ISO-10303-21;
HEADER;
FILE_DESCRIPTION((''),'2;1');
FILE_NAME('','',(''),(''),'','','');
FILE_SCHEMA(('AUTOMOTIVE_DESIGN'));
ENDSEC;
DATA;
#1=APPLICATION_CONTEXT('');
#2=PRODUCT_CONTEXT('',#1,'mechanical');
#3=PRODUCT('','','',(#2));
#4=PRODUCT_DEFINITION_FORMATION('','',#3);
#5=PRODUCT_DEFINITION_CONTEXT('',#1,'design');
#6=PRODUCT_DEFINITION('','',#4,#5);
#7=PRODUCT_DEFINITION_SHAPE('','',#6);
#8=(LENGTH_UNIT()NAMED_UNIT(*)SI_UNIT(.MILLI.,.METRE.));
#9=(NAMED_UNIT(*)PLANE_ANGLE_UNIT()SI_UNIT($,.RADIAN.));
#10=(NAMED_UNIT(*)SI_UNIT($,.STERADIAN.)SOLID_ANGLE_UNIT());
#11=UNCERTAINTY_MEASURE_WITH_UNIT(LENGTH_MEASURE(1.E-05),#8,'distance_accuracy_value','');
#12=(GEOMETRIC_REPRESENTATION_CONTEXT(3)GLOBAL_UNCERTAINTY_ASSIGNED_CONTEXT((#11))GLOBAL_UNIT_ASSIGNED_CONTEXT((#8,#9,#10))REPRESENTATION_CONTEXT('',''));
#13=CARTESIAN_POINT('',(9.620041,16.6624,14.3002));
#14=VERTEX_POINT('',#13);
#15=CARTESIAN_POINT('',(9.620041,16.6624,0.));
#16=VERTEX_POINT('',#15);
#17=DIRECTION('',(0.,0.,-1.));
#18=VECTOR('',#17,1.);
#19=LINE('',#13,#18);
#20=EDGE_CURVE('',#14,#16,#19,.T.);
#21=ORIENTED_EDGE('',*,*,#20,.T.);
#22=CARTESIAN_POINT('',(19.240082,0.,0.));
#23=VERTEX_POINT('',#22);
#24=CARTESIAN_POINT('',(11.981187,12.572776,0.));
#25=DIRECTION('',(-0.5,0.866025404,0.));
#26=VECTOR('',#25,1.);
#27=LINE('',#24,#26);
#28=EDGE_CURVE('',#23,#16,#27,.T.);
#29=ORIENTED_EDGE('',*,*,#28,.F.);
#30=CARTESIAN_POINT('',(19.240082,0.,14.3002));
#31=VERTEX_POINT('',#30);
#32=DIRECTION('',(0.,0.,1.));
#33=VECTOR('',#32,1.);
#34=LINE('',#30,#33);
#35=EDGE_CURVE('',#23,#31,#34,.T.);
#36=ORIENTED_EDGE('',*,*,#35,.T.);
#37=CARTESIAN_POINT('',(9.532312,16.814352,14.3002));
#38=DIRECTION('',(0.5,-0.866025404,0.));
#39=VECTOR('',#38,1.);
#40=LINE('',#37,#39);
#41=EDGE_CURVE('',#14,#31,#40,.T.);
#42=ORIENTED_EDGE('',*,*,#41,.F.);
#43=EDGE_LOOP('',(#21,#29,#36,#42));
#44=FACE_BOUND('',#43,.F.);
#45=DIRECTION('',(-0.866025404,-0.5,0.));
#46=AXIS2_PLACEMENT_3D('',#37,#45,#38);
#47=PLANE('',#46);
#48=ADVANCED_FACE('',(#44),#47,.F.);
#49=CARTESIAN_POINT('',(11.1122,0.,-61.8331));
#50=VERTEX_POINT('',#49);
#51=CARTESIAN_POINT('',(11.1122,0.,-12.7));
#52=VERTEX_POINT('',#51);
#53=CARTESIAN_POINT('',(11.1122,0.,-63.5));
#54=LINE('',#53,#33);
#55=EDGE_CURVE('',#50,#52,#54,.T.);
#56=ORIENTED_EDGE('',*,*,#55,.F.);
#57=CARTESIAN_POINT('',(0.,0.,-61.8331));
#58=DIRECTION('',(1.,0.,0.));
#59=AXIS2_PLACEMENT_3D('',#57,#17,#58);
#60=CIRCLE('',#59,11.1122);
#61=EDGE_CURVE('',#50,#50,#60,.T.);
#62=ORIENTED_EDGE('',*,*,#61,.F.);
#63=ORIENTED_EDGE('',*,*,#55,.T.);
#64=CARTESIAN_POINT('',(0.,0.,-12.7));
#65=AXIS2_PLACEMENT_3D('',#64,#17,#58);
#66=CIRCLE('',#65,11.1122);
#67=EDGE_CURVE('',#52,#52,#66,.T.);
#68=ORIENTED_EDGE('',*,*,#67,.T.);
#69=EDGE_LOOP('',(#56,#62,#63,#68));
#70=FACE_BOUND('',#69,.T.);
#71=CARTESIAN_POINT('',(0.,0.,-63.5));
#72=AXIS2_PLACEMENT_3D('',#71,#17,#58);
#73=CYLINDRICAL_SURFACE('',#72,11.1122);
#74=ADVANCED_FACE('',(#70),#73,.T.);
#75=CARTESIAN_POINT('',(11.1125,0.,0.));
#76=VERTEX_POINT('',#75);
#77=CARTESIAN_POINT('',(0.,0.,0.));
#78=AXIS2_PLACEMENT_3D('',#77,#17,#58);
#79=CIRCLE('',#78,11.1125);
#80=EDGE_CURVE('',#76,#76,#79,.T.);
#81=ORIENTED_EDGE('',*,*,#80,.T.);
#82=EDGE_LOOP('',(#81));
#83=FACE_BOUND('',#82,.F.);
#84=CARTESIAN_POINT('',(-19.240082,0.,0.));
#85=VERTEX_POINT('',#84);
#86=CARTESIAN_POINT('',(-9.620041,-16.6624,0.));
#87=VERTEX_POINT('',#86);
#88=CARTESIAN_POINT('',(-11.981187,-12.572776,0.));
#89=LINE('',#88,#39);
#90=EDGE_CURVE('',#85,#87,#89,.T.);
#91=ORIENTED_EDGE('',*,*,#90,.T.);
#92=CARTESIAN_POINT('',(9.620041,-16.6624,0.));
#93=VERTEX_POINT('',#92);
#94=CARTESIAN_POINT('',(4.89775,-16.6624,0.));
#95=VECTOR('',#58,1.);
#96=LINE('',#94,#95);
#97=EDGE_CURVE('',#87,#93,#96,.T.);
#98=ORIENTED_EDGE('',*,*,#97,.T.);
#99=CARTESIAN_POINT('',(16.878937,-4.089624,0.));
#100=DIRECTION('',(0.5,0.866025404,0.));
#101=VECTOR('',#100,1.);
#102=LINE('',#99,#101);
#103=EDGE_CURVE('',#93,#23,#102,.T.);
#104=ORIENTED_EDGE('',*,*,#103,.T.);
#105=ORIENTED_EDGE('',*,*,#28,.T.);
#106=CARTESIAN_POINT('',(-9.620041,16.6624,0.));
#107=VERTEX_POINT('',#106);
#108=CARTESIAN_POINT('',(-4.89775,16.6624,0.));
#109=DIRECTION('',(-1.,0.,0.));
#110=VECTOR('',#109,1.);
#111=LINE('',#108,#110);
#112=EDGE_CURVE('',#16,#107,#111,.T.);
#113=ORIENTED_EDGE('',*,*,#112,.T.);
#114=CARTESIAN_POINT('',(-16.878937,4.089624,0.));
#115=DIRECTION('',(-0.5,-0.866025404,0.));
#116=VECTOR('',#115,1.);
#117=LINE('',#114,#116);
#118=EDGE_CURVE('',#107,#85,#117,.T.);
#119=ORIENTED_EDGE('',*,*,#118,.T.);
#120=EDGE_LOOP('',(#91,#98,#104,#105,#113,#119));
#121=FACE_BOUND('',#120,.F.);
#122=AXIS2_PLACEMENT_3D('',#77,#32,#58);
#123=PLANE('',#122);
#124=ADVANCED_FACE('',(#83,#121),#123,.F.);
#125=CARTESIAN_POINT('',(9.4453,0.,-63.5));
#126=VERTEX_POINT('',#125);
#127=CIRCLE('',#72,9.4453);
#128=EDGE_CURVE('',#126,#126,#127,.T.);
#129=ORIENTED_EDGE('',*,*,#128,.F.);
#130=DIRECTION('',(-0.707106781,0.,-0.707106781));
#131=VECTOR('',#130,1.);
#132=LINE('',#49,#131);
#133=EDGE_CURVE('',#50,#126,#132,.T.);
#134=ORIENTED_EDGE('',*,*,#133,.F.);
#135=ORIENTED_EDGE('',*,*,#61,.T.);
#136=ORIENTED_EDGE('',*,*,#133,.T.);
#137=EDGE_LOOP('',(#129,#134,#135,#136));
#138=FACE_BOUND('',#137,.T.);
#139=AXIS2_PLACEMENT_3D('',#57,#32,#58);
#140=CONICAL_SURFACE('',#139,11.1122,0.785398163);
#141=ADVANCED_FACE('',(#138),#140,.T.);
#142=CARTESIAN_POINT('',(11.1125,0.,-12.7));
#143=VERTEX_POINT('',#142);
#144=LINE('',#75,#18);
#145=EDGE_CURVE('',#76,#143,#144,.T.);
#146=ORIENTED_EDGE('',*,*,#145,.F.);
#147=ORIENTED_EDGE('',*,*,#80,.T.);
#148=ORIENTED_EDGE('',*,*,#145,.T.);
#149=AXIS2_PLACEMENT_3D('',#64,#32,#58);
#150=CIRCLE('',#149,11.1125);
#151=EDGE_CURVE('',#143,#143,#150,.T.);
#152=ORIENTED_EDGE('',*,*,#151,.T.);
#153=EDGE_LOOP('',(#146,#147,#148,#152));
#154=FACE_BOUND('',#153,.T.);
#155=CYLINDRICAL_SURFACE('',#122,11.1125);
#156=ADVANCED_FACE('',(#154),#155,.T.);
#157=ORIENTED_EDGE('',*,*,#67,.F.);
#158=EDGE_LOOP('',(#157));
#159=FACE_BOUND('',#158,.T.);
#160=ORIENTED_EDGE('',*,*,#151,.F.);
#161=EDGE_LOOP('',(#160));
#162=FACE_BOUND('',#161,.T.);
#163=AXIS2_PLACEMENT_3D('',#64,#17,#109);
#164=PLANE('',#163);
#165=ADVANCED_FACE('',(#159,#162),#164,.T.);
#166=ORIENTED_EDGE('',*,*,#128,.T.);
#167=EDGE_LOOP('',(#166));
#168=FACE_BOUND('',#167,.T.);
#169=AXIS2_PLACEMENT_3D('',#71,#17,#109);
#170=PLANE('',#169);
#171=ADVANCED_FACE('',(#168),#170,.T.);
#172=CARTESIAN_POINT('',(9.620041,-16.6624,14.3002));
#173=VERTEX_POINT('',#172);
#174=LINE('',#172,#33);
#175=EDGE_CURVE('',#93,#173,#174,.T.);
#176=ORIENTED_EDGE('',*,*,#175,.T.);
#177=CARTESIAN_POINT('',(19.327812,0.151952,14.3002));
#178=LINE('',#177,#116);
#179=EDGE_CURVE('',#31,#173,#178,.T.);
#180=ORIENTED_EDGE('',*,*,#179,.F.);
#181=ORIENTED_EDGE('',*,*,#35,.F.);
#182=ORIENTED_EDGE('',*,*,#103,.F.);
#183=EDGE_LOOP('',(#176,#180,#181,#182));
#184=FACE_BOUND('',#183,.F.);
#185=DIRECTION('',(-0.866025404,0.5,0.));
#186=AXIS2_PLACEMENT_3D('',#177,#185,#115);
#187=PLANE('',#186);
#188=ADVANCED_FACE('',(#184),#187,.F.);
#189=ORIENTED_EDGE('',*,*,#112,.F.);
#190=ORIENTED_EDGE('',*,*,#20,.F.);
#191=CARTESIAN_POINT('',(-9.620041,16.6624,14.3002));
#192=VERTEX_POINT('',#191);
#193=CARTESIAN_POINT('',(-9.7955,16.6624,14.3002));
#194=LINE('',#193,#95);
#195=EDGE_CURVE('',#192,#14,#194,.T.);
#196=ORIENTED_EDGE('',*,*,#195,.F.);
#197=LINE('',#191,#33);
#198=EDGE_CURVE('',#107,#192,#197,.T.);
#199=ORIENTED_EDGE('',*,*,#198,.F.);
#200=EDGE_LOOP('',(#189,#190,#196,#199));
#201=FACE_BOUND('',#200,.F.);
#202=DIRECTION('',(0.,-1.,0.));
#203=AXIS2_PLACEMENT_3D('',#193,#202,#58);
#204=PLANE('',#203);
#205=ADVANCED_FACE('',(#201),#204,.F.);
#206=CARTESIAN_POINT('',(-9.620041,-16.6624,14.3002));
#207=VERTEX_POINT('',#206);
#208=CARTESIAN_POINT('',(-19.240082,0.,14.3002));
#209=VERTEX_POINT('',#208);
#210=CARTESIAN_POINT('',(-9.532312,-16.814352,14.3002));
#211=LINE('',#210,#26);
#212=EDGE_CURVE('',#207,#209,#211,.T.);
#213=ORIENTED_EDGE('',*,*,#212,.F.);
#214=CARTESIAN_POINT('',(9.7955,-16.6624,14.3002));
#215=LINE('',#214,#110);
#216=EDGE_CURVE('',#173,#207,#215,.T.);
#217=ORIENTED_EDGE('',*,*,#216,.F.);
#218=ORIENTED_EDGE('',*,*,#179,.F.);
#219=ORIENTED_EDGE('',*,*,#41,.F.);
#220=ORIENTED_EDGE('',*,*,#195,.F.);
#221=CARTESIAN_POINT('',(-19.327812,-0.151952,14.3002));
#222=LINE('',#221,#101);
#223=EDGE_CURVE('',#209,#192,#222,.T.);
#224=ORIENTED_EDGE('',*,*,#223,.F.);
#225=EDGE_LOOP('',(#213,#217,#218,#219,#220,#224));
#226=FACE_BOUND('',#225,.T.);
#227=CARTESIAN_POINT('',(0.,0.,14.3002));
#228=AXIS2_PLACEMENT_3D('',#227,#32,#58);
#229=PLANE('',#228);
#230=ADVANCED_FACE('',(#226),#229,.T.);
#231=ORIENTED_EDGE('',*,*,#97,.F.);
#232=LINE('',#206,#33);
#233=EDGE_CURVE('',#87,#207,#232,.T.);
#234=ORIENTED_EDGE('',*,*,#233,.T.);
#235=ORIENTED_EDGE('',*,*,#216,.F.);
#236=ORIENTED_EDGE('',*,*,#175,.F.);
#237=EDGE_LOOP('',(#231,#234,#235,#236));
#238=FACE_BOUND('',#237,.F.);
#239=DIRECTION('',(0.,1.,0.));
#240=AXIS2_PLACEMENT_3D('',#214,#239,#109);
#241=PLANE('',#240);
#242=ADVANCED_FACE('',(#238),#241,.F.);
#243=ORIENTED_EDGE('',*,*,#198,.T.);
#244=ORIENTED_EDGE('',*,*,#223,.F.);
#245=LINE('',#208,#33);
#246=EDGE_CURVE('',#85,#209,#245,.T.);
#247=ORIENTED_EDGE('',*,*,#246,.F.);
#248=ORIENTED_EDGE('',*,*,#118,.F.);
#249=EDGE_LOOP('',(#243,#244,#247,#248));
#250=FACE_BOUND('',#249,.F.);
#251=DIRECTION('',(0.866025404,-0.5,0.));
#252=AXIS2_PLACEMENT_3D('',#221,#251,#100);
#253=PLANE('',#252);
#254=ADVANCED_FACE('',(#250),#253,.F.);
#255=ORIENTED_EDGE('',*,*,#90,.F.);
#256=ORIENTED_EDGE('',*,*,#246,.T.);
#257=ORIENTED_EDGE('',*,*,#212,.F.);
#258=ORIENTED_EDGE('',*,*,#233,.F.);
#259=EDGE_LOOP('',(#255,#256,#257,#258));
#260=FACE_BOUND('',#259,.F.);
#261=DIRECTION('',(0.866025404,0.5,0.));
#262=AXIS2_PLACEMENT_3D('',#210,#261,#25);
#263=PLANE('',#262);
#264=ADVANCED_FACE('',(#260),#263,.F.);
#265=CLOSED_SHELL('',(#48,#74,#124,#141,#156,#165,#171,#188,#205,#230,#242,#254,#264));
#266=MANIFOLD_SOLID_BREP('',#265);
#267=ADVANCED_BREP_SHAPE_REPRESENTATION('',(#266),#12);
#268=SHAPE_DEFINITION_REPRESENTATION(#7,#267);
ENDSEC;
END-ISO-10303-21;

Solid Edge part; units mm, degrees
sketch "Sketch1" plane through (0, 0, 0) normal (0, 0, 1) x (1, 0, 0)
  circle A0 centre (0, 0) radius 19.3284
  dimension "D1" = 38.6568
extrude "Protrusion1" add sketch "Sketch1" along normal blind 14.3002
sketch "Sketch2" plane through (0, 0, 0) normal (0, 0, -1) x (1, 0, 0)
  circle A0 centre (0, 0) radius 11.1125
extrude "Protrusion2" add sketch "Sketch2" along normal blind 63.5
sketch "Sketch3" plane through (0, 0, -63.5) normal (0, 0, -1) x (1, 0, 0)
  circle A0 centre (0, 0) radius 11.1122
extrude "Cutout1" cut sketch "Sketch3" against normal blind 50.8 flip side to cut
chamfer "Chamfer_1" distance 1.6669 angle 45 1 edges at (-11.1122, 0, -63.5)
sketch "Sketch4" plane through (0, 0, 14.3002) normal (0, 0, 1) x (1, 0, 0)
  line L0 (-9.7955, 16.6624) -> (9.7955, 16.6624)
  dimension "D1" = 33.3248
extrude "Cutout2" cut sketch "Sketch4" against normal up to next material side at (0, 16.7124, 14.3002)
pattern_circular "Pattern1" count 6 over 360 about axis through (0, 0, 14.3002) along (0, 0, 1) of "Cutout2"
properties part number "24102588"
